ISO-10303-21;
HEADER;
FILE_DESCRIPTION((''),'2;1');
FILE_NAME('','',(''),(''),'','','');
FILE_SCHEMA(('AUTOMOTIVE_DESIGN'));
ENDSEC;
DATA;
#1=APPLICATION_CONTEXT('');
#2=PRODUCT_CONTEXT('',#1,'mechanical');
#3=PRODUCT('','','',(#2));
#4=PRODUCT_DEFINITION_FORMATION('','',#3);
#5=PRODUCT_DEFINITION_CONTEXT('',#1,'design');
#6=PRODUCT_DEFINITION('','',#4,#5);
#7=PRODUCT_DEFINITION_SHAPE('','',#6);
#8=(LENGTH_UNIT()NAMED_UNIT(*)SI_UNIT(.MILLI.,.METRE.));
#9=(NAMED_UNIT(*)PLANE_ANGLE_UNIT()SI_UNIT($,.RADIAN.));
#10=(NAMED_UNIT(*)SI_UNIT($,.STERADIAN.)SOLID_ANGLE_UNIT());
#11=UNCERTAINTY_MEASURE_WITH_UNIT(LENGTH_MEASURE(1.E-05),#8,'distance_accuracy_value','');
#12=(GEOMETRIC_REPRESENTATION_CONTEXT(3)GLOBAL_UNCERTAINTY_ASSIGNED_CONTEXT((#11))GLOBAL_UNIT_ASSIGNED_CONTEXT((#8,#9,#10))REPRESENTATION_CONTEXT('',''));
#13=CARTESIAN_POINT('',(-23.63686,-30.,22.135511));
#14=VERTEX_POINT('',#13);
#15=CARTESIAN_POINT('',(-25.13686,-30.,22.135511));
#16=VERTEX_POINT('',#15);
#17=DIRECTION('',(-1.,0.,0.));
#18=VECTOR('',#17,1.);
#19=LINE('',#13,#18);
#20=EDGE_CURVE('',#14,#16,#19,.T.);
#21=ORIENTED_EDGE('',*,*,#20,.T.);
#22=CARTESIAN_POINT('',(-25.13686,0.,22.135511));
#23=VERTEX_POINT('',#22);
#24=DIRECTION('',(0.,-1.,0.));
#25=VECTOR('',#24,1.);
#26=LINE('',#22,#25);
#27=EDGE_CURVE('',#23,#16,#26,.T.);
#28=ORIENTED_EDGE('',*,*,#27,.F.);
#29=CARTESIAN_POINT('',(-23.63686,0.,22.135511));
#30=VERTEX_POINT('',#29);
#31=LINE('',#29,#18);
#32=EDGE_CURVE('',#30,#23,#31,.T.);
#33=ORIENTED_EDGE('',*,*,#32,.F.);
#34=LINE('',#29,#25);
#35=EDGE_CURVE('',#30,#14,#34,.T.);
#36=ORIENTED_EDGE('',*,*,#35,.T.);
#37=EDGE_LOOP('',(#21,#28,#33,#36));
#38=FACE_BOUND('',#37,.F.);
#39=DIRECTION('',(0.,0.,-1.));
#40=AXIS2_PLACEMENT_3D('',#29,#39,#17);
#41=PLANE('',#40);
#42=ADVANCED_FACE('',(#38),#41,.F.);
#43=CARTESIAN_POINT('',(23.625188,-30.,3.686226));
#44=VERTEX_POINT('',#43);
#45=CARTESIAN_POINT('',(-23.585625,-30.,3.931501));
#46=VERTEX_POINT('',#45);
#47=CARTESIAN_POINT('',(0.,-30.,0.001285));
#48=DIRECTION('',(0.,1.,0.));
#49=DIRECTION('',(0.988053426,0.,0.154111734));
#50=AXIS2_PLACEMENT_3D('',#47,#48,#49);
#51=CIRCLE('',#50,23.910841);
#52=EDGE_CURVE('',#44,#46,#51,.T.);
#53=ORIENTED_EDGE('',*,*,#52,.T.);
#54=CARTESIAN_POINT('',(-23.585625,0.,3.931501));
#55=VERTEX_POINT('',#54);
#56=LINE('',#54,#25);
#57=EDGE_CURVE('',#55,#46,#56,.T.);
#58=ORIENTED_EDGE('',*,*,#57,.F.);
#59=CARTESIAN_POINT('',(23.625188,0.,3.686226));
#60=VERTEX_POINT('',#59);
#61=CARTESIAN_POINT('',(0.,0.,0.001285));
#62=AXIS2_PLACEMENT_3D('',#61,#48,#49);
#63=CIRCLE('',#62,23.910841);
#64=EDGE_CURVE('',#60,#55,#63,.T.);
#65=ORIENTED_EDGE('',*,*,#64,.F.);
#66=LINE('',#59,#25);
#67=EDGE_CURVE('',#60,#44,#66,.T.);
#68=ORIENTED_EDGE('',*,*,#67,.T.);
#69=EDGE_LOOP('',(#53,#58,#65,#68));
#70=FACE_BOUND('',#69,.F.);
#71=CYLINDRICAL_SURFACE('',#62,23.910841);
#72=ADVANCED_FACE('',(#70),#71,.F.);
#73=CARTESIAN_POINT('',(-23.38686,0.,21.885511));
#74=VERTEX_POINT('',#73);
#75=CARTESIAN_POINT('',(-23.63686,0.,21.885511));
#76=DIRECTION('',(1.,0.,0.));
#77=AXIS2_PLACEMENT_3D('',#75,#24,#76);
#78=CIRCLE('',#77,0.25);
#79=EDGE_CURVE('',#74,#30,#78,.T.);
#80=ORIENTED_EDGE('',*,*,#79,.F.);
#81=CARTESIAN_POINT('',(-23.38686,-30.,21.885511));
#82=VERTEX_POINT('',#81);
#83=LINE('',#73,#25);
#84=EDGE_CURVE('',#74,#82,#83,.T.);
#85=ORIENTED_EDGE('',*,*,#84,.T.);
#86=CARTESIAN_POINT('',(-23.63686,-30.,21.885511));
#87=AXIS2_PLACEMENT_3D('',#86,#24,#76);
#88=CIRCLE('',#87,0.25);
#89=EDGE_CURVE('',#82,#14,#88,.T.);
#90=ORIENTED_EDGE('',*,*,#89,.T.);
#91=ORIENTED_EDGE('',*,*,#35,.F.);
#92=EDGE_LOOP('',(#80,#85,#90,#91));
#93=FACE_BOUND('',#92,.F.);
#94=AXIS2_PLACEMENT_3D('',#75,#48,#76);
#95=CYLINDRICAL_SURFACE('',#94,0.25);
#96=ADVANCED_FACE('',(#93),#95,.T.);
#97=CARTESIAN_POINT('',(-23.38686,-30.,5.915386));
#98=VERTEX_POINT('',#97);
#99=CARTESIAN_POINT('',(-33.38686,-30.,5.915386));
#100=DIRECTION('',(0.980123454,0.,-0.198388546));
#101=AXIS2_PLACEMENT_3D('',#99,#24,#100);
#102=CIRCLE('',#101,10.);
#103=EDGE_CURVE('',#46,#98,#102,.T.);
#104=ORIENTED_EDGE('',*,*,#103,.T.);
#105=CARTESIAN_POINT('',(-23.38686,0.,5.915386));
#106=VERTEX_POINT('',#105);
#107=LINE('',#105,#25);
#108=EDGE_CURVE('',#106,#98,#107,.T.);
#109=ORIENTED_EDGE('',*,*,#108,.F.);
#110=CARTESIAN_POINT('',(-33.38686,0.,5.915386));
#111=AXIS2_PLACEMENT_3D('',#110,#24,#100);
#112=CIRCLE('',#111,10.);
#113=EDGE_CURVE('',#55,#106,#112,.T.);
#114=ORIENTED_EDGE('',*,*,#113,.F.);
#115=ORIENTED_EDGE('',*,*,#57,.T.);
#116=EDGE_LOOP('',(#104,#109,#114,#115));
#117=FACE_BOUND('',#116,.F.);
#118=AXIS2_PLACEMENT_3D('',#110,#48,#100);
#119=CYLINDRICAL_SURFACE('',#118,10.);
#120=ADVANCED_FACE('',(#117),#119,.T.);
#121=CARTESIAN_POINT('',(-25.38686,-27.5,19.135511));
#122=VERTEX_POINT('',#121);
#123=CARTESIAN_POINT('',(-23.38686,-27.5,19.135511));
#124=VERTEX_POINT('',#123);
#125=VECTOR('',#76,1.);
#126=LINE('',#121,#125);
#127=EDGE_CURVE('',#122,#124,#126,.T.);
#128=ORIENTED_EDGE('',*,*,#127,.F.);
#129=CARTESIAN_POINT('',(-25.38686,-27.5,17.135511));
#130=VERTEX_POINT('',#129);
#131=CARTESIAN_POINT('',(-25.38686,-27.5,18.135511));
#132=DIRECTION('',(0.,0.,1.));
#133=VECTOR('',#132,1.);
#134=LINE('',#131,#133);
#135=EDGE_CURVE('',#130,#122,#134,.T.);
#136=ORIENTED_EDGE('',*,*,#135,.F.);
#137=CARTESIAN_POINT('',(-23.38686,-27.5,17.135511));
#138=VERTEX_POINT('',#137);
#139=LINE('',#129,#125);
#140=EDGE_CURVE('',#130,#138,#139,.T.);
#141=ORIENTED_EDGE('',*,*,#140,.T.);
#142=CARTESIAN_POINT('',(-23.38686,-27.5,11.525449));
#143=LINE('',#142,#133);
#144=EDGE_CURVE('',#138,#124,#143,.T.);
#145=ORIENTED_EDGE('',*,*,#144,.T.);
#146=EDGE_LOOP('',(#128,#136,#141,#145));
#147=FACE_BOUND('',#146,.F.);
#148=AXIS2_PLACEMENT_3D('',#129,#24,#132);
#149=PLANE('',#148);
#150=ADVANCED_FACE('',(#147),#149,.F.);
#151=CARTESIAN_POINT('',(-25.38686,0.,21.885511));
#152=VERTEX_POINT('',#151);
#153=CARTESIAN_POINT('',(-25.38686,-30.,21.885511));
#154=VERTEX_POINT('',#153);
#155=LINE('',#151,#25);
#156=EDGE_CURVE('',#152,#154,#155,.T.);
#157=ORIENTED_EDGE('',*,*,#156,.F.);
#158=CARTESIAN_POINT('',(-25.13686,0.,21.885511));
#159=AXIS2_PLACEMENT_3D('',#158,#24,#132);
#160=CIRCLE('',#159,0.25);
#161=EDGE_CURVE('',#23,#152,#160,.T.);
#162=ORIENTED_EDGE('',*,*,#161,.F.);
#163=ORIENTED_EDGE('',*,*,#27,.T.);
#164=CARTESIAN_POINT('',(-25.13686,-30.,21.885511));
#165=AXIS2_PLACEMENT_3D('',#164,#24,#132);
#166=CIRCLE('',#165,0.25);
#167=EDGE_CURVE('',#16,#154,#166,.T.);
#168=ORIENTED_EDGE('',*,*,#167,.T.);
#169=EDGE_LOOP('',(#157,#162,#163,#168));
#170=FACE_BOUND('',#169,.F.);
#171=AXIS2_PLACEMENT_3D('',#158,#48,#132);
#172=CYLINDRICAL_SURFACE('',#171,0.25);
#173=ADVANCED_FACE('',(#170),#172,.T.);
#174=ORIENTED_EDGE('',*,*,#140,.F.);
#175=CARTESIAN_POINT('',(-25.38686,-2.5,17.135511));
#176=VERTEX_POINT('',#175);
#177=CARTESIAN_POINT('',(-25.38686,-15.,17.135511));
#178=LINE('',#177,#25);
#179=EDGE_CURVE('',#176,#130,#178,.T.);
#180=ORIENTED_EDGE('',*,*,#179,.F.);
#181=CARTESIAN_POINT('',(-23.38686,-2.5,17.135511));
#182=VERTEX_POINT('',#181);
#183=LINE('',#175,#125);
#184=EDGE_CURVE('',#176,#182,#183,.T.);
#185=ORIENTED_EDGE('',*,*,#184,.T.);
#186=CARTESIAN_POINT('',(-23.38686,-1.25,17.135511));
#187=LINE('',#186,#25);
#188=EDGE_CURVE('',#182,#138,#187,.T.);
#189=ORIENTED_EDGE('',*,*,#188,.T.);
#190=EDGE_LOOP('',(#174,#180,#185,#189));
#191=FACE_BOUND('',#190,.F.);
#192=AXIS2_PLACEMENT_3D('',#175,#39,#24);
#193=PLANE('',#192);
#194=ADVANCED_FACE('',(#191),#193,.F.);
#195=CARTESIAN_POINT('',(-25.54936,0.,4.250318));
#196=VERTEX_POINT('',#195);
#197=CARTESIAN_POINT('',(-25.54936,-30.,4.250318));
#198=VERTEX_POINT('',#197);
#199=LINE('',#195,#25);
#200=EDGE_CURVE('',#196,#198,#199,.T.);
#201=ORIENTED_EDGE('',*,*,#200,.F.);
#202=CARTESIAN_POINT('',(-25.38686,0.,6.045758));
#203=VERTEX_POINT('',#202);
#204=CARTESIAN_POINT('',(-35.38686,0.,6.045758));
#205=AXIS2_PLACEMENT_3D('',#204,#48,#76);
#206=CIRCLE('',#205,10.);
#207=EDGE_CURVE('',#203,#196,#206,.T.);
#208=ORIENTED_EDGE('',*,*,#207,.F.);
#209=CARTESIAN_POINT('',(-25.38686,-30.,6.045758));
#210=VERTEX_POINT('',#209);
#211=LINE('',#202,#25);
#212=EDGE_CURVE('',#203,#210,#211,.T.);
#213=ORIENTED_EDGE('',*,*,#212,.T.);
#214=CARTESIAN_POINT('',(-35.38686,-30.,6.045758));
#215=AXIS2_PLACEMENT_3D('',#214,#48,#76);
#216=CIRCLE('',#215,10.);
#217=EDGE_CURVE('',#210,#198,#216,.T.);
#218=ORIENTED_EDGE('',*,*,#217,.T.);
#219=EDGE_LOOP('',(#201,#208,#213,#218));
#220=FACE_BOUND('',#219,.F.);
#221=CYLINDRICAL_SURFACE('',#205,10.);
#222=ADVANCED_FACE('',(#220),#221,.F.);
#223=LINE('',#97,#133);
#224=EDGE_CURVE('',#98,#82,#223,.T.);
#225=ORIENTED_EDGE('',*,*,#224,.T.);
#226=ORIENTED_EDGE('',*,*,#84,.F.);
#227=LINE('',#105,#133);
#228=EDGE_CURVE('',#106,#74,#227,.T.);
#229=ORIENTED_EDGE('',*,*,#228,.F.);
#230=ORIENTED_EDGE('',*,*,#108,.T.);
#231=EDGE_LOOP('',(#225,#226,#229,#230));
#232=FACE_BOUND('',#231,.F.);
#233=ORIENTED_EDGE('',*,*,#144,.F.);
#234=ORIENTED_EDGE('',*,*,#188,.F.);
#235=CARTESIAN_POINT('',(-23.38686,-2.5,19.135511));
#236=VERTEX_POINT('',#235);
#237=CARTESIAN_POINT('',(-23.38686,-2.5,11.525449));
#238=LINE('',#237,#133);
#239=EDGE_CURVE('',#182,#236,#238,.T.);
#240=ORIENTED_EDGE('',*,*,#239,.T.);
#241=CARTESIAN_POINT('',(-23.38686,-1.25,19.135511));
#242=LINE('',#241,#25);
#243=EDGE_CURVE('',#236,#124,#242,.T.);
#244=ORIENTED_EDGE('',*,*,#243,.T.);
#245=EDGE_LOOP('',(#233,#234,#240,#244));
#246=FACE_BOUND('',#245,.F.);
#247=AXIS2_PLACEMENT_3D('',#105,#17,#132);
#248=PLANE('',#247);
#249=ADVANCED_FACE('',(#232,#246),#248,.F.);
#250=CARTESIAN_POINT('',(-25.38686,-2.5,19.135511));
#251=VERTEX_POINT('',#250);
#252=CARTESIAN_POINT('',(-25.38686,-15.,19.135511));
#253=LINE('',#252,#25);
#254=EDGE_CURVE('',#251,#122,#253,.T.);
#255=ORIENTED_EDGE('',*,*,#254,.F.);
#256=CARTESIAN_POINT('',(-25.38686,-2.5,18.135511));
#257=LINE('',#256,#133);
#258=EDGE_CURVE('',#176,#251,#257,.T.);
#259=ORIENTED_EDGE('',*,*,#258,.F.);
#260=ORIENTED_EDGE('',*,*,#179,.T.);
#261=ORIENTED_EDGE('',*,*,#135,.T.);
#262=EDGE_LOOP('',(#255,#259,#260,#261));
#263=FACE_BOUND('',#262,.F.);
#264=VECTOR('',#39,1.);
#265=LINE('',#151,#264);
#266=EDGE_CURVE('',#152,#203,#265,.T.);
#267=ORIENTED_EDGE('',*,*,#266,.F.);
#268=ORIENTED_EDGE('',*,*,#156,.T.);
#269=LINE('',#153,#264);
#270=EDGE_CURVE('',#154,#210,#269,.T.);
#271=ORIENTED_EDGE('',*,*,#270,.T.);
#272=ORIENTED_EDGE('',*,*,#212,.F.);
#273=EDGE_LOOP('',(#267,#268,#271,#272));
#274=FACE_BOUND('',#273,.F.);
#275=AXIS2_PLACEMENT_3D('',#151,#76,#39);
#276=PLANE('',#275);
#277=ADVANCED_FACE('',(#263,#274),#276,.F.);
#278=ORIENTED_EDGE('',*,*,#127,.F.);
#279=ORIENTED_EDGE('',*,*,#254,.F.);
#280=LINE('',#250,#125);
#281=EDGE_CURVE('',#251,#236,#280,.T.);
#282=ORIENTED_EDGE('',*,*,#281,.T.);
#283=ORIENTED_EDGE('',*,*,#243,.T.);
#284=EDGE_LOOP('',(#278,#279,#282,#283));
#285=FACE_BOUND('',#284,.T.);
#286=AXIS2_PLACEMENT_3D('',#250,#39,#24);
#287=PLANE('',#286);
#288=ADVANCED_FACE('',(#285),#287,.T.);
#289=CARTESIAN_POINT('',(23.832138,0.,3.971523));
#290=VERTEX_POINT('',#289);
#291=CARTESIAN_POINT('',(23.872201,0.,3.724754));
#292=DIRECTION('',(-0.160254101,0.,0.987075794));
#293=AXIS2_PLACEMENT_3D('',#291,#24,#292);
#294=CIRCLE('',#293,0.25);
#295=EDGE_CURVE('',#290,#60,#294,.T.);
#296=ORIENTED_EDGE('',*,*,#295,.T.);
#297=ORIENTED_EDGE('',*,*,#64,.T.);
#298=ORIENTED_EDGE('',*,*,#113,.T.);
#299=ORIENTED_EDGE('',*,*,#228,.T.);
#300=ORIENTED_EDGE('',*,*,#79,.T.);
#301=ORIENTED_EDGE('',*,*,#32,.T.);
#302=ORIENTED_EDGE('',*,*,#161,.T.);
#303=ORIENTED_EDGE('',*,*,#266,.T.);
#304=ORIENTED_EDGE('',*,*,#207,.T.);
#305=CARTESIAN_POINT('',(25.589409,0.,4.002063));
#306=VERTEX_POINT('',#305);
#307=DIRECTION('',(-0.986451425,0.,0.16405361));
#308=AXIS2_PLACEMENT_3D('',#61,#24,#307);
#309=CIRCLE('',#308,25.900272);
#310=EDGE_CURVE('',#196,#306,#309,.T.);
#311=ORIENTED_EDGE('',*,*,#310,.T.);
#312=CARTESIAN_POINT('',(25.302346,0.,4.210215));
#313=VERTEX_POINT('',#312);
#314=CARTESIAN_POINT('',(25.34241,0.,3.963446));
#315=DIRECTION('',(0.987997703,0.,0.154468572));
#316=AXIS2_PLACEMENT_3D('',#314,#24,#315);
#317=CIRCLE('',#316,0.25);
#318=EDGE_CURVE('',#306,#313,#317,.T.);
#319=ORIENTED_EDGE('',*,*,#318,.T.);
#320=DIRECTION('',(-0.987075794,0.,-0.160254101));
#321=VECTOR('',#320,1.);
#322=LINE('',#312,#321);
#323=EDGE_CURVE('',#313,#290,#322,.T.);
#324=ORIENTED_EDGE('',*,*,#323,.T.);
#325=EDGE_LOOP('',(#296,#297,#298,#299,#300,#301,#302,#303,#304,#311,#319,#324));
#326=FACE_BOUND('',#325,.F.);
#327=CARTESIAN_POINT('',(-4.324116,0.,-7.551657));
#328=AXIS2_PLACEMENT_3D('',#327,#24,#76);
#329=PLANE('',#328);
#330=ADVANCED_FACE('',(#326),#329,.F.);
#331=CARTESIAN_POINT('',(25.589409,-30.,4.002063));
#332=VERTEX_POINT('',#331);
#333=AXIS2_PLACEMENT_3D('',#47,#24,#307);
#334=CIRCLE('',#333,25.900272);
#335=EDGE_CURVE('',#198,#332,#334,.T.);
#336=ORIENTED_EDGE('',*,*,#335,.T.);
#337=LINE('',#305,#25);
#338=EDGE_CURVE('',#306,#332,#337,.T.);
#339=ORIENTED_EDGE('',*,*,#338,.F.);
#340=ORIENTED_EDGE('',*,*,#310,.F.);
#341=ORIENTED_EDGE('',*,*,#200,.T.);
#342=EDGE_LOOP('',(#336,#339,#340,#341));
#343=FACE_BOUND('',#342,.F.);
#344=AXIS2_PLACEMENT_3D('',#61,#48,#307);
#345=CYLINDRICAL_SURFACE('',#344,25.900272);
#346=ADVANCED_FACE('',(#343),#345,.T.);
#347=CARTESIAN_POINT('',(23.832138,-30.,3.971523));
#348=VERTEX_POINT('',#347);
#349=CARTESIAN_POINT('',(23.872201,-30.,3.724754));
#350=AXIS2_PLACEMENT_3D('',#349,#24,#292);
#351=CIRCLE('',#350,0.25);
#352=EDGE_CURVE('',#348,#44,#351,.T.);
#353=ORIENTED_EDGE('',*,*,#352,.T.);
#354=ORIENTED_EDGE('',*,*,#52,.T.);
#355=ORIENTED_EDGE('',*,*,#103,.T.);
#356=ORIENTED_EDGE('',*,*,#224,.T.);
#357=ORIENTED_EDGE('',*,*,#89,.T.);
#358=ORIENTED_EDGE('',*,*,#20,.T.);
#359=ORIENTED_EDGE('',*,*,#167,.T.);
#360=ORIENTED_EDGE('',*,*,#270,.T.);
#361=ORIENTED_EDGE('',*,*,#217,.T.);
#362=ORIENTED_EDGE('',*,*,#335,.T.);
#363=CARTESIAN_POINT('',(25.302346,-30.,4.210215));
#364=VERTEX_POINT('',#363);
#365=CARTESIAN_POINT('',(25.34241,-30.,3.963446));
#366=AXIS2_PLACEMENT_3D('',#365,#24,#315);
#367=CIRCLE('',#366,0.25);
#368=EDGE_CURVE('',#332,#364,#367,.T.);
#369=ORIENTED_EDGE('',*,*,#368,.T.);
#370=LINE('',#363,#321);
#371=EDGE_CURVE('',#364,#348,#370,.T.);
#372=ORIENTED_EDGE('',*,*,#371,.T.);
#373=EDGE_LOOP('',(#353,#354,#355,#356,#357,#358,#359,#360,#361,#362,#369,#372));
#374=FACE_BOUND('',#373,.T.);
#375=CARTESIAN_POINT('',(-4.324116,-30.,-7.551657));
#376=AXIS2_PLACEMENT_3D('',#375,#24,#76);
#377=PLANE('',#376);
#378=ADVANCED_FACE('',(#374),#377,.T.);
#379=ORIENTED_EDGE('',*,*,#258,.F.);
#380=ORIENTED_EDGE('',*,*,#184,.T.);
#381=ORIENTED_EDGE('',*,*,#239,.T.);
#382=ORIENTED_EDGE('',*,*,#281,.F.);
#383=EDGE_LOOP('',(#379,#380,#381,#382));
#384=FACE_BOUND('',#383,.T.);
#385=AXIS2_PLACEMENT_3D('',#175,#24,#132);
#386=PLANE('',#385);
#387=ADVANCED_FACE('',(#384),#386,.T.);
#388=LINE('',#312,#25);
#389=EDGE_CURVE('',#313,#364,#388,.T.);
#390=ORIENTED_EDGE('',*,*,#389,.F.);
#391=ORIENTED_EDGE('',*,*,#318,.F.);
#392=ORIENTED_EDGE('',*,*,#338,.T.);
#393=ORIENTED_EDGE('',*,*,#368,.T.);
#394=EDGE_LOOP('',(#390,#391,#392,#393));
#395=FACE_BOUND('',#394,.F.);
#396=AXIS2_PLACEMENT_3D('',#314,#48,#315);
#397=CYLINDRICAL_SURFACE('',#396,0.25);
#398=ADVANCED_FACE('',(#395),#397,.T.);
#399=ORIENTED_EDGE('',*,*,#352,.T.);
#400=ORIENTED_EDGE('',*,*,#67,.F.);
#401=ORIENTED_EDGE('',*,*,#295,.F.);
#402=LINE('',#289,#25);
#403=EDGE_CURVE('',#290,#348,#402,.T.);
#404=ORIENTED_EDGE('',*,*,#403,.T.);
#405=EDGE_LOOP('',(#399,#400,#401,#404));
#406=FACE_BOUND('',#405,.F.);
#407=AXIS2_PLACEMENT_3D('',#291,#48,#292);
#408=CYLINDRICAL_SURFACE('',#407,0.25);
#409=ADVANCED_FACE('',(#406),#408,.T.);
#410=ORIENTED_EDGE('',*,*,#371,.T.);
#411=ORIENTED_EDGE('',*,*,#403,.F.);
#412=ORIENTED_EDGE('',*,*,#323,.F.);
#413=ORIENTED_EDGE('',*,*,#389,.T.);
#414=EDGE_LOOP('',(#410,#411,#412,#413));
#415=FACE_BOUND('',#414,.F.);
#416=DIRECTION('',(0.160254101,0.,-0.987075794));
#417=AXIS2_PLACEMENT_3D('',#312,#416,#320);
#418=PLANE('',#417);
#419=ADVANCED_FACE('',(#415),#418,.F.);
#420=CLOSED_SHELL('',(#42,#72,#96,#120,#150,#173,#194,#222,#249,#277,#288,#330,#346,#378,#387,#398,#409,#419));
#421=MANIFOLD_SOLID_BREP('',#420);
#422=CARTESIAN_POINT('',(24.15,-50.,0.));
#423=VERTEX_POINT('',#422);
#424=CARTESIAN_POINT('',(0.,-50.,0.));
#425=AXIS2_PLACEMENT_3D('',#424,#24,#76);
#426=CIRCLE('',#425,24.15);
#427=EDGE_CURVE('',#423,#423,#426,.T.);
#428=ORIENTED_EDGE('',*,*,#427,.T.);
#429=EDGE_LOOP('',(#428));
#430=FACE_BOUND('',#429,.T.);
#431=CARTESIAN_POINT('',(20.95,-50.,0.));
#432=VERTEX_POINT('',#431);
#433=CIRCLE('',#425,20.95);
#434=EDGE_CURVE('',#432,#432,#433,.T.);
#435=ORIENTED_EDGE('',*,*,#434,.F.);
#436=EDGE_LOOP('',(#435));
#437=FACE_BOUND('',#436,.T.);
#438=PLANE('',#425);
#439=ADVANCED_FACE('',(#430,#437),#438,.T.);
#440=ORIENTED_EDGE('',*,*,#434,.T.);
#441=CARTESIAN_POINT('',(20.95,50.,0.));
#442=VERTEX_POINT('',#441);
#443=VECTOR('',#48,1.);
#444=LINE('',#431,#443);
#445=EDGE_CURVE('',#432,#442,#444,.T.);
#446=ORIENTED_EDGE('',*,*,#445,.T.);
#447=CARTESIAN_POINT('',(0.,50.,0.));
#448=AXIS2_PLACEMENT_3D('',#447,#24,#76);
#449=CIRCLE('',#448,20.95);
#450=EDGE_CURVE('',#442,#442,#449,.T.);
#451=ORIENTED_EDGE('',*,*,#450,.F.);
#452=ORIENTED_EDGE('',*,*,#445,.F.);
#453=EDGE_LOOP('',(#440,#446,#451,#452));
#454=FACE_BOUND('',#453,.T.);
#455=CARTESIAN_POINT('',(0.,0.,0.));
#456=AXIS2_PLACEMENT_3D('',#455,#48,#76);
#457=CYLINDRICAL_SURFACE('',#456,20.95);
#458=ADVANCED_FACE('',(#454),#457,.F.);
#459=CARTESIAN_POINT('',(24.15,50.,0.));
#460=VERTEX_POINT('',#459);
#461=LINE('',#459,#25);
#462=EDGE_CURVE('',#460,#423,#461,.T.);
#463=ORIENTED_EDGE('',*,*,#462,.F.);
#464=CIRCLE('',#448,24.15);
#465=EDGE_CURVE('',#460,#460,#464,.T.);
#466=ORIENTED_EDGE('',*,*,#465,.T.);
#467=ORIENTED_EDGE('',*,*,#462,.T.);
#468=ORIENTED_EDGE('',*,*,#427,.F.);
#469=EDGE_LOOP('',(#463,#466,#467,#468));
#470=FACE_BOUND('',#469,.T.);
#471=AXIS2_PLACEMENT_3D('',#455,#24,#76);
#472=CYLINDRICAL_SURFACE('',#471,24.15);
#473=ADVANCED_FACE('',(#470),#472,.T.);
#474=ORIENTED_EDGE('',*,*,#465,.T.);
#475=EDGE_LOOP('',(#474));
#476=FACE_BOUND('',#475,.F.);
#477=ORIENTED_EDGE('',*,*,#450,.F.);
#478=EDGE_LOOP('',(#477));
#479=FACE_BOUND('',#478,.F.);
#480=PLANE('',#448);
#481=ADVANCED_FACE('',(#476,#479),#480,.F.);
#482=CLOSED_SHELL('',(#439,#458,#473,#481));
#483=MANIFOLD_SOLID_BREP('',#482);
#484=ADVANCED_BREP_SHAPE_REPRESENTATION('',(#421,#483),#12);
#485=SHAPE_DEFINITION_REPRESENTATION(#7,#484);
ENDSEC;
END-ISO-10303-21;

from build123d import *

# Parameters (mm, degrees)
F0_R     = 24.15
F0_R_2   = 20.95
F1_DEPTH = 50
F3_DEPTH = 30
F5_W     = 25
F5_H     = 2
F6_DEPTH = 51.2881315685


# Not quite as in the source:
# - a feature of the source that left no trace in its solid (it failed there, or was rolled back) is left out


with BuildPart() as f1:
    # F0 (on Front) → F1 (new body, symmetric)
    with BuildSketch(Plane.XZ):
        Circle(F0_R)
        Circle(F0_R_2, mode=Mode.SUBTRACT)
    extrude(amount=F1_DEPTH, both=True)


with BuildPart() as f3:
    # F2 (on Front) → F3 (new body)
    with BuildSketch(Plane.XZ):
        with BuildLine():
            Line((-25.3868595608, 21.8855109754), (-25.3868595608, 6.0457583589))
            ThreePointArc((-25.3868595608, 6.0457583589), (-25.4275675824, 5.1443687165), (-25.5493602183, 4.250317832))
            ThreePointArc((-25.5493602183, 4.250317832), (-0.1257323753, -25.8986821176), (25.5894092407, 4.0020627281))
            ThreePointArc((25.5894092407, 4.0020627281), (25.4891661105, 4.1658377534), (25.3023462898, 4.2102145337))
            Line((25.3023462898, 4.2102145337), (23.8321379738, 3.9715227194))
            ThreePointArc((23.8321379738, 3.9715227194), (23.6698358356, 3.8715466122), (23.6251881424, 3.6862258374))
            ThreePointArc((23.6251881424, 3.6862258374), (-0.1242226088, -23.9092333702), (-23.5856250226, 3.9315007559))
            ThreePointArc((-23.5856250226, 3.9315007559), (-23.4366750052, 4.9184773412), (-23.3868595608, 5.9153862181))
            Line((-23.3868595608, 5.9153862181), (-23.3868595608, 21.8855109754))
            ThreePointArc((-23.3868595608, 21.8855109754), (-23.4600828655, 22.0622876707), (-23.6368595608, 22.1355109754))
            Line((-23.6368595608, 22.1355109754), (-25.1368595608, 22.1355109754))
            ThreePointArc((-25.1368595608, 22.1355109754), (-25.3136362561, 22.0622876707), (-25.3868595608, 21.8855109754))
        make_face()
    extrude(amount=F3_DEPTH)

    # F5 (on face) → F6 (cut, through all)
    with BuildSketch(Plane(origin=(-25.3868595608, 0, 0), x_dir=(0, -1, 0), z_dir=(-1, 0, 0))):
        with Locations((15, 18.1355109754)):
            Rectangle(F5_W, F5_H)
    extrude(amount=-F6_DEPTH, mode=Mode.SUBTRACT)


solid = Compound([f1.part, f3.part])
